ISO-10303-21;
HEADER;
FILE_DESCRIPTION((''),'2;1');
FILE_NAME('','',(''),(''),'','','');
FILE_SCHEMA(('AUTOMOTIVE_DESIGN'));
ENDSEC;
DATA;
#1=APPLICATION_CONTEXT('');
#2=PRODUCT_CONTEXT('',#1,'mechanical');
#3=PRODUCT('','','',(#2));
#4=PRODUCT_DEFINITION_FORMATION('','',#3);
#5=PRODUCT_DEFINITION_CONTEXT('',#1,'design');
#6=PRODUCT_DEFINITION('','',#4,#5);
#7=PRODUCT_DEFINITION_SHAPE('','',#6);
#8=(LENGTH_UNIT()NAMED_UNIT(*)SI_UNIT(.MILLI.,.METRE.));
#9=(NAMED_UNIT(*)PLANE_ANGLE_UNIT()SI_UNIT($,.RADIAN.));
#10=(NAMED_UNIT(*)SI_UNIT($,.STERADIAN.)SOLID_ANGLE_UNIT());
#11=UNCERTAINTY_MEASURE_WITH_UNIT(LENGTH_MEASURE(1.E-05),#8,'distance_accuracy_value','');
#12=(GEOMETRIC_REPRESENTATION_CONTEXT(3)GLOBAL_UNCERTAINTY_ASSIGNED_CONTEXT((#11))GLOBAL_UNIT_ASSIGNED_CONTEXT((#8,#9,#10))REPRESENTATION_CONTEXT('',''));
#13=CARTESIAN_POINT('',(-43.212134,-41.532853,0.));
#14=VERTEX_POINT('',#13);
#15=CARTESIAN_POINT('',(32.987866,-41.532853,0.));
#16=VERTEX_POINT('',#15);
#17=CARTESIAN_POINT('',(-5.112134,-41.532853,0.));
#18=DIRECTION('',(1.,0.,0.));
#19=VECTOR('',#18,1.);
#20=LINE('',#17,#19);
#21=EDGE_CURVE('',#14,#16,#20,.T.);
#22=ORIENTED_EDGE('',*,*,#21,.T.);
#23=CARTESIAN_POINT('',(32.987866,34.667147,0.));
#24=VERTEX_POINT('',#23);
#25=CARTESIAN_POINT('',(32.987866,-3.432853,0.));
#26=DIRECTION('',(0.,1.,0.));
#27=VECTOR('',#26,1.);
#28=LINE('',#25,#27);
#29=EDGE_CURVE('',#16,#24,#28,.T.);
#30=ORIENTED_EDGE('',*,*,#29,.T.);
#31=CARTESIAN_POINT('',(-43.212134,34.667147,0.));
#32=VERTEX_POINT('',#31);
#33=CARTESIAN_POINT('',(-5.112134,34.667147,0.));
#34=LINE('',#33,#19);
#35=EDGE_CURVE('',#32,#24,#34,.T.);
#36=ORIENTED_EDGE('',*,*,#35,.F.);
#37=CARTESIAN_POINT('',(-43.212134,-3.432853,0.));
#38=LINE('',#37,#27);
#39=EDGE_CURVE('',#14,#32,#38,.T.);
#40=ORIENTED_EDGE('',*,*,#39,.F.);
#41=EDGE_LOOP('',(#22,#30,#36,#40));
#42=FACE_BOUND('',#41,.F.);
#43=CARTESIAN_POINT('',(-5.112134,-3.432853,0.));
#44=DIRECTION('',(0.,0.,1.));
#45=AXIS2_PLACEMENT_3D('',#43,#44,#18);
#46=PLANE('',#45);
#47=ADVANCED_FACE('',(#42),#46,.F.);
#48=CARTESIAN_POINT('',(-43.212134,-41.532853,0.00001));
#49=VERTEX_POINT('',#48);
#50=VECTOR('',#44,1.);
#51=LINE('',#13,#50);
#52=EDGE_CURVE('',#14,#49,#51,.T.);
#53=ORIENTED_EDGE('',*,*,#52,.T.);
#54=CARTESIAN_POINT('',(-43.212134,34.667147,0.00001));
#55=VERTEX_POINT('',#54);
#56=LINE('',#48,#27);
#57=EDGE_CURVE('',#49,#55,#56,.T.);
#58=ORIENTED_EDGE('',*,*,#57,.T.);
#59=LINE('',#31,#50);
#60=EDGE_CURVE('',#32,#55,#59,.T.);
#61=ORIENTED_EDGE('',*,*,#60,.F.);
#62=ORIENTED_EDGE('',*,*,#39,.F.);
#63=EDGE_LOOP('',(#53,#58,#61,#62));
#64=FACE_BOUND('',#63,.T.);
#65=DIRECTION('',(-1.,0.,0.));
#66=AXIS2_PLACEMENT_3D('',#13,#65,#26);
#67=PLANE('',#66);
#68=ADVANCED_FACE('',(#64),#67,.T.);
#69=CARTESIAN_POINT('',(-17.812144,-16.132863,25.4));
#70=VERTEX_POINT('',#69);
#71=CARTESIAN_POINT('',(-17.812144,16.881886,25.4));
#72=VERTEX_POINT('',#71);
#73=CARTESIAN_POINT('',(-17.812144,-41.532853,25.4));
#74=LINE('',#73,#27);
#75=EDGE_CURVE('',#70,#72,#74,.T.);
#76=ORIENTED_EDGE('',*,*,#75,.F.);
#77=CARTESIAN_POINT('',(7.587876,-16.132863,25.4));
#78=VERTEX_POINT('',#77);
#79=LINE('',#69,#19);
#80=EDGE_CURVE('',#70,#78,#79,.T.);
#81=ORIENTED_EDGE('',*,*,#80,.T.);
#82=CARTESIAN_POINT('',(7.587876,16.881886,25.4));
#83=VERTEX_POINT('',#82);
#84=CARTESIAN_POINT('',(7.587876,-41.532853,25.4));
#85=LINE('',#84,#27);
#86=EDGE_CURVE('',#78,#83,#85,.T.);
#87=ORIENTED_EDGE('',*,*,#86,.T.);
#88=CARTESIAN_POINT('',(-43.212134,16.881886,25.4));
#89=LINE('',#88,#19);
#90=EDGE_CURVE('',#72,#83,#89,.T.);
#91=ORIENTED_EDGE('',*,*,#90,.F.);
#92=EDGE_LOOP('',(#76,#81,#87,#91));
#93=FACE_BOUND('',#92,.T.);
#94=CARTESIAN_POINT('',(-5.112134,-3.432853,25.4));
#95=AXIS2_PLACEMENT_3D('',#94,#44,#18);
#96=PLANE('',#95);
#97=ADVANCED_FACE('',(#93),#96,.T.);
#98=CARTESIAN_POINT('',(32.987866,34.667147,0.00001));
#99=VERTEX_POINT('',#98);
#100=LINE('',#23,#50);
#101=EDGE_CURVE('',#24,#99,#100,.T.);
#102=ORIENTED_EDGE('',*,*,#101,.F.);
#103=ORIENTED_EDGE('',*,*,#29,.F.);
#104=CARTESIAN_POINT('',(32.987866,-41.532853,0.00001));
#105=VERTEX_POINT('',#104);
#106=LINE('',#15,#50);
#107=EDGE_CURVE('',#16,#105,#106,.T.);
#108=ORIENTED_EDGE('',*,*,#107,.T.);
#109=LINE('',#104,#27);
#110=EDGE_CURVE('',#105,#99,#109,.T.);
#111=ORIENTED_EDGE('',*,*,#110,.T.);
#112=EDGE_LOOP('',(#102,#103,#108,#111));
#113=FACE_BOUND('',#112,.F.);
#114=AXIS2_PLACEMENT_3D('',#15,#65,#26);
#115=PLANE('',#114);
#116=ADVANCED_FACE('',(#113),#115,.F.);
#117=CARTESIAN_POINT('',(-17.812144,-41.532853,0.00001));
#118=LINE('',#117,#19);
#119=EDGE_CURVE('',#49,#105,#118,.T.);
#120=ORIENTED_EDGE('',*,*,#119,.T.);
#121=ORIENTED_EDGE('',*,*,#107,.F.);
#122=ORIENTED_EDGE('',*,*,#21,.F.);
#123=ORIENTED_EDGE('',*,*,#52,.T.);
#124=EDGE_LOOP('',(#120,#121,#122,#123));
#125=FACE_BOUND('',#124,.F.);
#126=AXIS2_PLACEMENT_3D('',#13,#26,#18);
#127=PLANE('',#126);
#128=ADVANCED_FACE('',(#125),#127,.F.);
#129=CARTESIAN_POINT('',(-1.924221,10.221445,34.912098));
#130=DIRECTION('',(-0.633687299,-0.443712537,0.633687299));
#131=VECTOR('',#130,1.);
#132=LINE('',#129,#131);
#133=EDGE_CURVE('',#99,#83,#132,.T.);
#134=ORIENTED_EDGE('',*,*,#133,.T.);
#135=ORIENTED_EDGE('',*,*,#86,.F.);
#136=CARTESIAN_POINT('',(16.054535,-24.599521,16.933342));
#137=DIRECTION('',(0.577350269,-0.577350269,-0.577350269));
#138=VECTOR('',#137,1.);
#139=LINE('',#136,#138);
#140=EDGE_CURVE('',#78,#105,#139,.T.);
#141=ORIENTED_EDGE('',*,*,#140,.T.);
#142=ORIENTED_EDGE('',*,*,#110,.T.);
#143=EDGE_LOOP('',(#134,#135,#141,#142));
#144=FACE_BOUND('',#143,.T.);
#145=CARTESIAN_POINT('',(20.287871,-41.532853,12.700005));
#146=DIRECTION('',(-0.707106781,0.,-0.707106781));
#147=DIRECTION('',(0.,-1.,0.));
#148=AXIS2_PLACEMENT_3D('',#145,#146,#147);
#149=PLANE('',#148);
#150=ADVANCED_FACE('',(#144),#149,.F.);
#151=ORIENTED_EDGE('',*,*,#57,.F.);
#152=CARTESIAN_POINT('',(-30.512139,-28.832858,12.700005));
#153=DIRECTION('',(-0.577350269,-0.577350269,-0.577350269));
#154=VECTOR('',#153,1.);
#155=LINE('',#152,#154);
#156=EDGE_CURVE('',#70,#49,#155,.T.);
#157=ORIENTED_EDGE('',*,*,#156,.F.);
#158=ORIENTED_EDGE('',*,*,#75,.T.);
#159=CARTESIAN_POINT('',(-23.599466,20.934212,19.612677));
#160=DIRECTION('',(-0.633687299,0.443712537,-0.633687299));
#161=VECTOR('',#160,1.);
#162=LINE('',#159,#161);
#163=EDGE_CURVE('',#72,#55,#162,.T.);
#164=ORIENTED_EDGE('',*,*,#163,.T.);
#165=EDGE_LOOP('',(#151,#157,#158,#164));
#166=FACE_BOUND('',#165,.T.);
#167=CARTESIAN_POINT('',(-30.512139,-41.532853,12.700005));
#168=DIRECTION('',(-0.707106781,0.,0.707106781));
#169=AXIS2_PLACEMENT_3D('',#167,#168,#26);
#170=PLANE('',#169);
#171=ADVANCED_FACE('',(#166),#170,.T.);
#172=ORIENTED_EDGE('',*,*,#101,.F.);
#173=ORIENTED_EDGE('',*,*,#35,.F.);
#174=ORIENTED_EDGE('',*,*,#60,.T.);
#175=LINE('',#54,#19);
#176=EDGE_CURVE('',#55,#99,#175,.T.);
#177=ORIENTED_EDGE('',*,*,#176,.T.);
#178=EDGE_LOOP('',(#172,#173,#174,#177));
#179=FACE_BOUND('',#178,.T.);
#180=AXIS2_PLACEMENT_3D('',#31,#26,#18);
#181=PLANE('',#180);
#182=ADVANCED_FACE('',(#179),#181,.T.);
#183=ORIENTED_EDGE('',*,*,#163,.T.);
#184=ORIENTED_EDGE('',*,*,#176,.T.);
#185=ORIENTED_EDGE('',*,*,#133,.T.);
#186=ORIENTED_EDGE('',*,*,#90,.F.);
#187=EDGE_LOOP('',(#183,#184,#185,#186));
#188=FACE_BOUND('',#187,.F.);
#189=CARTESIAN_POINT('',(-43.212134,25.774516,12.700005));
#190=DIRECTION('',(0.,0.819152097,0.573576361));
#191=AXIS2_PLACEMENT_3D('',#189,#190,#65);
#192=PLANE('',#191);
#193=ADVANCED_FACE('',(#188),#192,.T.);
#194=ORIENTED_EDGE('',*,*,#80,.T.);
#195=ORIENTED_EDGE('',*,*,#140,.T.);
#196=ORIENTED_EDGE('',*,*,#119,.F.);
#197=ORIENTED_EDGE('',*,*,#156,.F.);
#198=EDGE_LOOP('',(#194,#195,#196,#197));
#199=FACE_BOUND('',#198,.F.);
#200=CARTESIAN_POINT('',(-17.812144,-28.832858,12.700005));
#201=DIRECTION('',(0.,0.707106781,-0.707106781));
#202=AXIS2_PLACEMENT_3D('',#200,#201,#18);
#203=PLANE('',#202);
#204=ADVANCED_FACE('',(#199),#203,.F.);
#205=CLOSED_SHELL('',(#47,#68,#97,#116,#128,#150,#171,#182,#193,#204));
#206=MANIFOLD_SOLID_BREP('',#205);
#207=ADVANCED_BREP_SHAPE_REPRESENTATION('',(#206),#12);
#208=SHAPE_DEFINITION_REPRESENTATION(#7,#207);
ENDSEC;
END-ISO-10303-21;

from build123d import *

# Parameters (mm, degrees)
F0_W     = 76.2
F0_H     = 76.2
F1_DEPTH = 25.4
F2_SIZE2 = 25.39999
F2_SIZE  = 25.39999
F3_SIZE2 = 17.785261
F3_SIZE  = 25.39999
F4_SIZE2 = 25.39999
F4_SIZE  = 25.39999
F5_SIZE2 = 25.39999
F5_SIZE  = 25.39999


# Not quite as in the source:
# - a fillet or chamfer is up to 0.001 mm smaller than in the source, because OpenCascade refuses the exact size


with BuildPart() as f1:
    # F0 (on Top) → F1 (new body)
    with BuildSketch(Plane.XY):
        with Locations((-5.1121336523, -3.4328531474)):
            Rectangle(F0_W, F0_H)
    extrude(amount=F1_DEPTH)

    # F2 (size 25.4 and 25.4 in the source; OpenCascade refuses exactly that, so slightly less here)
    f2_edges = [f1.edges().sort_by_distance(p)[0] for p in [
        (32.987866, -3.432853, 25.4),
    ]]
    chamfer(f2_edges, length=F2_SIZE, length2=F2_SIZE2)

    # F3 (size 25.4 and 17.7852714705 in the source; OpenCascade refuses exactly that, so slightly less here)
    f3_edges = [f1.edges().sort_by_distance(p)[0] for p in [
        (-17.812129, 34.667147, 25.4),
    ]]
    f3_side = f1.faces().sort_by_distance((-11.038795, 34.667147, 11.853333))[0]
    chamfer(f3_edges, length=F3_SIZE, length2=F3_SIZE2, reference=f3_side)

    # F4 (size 25.4 and 25.4 in the source; OpenCascade refuses exactly that, so slightly less here)
    f4_edges = [f1.edges().sort_by_distance(p)[0] for p in [
        (-43.212134, -12.325484, 25.4),
    ]]
    chamfer(f4_edges, length=F4_SIZE, length2=F4_SIZE2)

    # F5 (size 25.4 and 25.4 in the source; OpenCascade refuses exactly that, so slightly less here)
    f5_edges = [f1.edges().sort_by_distance(p)[0] for p in [
        (-5.112134, -41.532853, 25.4),
    ]]
    chamfer(f5_edges, length=F5_SIZE, length2=F5_SIZE2)


solid = f1.part
